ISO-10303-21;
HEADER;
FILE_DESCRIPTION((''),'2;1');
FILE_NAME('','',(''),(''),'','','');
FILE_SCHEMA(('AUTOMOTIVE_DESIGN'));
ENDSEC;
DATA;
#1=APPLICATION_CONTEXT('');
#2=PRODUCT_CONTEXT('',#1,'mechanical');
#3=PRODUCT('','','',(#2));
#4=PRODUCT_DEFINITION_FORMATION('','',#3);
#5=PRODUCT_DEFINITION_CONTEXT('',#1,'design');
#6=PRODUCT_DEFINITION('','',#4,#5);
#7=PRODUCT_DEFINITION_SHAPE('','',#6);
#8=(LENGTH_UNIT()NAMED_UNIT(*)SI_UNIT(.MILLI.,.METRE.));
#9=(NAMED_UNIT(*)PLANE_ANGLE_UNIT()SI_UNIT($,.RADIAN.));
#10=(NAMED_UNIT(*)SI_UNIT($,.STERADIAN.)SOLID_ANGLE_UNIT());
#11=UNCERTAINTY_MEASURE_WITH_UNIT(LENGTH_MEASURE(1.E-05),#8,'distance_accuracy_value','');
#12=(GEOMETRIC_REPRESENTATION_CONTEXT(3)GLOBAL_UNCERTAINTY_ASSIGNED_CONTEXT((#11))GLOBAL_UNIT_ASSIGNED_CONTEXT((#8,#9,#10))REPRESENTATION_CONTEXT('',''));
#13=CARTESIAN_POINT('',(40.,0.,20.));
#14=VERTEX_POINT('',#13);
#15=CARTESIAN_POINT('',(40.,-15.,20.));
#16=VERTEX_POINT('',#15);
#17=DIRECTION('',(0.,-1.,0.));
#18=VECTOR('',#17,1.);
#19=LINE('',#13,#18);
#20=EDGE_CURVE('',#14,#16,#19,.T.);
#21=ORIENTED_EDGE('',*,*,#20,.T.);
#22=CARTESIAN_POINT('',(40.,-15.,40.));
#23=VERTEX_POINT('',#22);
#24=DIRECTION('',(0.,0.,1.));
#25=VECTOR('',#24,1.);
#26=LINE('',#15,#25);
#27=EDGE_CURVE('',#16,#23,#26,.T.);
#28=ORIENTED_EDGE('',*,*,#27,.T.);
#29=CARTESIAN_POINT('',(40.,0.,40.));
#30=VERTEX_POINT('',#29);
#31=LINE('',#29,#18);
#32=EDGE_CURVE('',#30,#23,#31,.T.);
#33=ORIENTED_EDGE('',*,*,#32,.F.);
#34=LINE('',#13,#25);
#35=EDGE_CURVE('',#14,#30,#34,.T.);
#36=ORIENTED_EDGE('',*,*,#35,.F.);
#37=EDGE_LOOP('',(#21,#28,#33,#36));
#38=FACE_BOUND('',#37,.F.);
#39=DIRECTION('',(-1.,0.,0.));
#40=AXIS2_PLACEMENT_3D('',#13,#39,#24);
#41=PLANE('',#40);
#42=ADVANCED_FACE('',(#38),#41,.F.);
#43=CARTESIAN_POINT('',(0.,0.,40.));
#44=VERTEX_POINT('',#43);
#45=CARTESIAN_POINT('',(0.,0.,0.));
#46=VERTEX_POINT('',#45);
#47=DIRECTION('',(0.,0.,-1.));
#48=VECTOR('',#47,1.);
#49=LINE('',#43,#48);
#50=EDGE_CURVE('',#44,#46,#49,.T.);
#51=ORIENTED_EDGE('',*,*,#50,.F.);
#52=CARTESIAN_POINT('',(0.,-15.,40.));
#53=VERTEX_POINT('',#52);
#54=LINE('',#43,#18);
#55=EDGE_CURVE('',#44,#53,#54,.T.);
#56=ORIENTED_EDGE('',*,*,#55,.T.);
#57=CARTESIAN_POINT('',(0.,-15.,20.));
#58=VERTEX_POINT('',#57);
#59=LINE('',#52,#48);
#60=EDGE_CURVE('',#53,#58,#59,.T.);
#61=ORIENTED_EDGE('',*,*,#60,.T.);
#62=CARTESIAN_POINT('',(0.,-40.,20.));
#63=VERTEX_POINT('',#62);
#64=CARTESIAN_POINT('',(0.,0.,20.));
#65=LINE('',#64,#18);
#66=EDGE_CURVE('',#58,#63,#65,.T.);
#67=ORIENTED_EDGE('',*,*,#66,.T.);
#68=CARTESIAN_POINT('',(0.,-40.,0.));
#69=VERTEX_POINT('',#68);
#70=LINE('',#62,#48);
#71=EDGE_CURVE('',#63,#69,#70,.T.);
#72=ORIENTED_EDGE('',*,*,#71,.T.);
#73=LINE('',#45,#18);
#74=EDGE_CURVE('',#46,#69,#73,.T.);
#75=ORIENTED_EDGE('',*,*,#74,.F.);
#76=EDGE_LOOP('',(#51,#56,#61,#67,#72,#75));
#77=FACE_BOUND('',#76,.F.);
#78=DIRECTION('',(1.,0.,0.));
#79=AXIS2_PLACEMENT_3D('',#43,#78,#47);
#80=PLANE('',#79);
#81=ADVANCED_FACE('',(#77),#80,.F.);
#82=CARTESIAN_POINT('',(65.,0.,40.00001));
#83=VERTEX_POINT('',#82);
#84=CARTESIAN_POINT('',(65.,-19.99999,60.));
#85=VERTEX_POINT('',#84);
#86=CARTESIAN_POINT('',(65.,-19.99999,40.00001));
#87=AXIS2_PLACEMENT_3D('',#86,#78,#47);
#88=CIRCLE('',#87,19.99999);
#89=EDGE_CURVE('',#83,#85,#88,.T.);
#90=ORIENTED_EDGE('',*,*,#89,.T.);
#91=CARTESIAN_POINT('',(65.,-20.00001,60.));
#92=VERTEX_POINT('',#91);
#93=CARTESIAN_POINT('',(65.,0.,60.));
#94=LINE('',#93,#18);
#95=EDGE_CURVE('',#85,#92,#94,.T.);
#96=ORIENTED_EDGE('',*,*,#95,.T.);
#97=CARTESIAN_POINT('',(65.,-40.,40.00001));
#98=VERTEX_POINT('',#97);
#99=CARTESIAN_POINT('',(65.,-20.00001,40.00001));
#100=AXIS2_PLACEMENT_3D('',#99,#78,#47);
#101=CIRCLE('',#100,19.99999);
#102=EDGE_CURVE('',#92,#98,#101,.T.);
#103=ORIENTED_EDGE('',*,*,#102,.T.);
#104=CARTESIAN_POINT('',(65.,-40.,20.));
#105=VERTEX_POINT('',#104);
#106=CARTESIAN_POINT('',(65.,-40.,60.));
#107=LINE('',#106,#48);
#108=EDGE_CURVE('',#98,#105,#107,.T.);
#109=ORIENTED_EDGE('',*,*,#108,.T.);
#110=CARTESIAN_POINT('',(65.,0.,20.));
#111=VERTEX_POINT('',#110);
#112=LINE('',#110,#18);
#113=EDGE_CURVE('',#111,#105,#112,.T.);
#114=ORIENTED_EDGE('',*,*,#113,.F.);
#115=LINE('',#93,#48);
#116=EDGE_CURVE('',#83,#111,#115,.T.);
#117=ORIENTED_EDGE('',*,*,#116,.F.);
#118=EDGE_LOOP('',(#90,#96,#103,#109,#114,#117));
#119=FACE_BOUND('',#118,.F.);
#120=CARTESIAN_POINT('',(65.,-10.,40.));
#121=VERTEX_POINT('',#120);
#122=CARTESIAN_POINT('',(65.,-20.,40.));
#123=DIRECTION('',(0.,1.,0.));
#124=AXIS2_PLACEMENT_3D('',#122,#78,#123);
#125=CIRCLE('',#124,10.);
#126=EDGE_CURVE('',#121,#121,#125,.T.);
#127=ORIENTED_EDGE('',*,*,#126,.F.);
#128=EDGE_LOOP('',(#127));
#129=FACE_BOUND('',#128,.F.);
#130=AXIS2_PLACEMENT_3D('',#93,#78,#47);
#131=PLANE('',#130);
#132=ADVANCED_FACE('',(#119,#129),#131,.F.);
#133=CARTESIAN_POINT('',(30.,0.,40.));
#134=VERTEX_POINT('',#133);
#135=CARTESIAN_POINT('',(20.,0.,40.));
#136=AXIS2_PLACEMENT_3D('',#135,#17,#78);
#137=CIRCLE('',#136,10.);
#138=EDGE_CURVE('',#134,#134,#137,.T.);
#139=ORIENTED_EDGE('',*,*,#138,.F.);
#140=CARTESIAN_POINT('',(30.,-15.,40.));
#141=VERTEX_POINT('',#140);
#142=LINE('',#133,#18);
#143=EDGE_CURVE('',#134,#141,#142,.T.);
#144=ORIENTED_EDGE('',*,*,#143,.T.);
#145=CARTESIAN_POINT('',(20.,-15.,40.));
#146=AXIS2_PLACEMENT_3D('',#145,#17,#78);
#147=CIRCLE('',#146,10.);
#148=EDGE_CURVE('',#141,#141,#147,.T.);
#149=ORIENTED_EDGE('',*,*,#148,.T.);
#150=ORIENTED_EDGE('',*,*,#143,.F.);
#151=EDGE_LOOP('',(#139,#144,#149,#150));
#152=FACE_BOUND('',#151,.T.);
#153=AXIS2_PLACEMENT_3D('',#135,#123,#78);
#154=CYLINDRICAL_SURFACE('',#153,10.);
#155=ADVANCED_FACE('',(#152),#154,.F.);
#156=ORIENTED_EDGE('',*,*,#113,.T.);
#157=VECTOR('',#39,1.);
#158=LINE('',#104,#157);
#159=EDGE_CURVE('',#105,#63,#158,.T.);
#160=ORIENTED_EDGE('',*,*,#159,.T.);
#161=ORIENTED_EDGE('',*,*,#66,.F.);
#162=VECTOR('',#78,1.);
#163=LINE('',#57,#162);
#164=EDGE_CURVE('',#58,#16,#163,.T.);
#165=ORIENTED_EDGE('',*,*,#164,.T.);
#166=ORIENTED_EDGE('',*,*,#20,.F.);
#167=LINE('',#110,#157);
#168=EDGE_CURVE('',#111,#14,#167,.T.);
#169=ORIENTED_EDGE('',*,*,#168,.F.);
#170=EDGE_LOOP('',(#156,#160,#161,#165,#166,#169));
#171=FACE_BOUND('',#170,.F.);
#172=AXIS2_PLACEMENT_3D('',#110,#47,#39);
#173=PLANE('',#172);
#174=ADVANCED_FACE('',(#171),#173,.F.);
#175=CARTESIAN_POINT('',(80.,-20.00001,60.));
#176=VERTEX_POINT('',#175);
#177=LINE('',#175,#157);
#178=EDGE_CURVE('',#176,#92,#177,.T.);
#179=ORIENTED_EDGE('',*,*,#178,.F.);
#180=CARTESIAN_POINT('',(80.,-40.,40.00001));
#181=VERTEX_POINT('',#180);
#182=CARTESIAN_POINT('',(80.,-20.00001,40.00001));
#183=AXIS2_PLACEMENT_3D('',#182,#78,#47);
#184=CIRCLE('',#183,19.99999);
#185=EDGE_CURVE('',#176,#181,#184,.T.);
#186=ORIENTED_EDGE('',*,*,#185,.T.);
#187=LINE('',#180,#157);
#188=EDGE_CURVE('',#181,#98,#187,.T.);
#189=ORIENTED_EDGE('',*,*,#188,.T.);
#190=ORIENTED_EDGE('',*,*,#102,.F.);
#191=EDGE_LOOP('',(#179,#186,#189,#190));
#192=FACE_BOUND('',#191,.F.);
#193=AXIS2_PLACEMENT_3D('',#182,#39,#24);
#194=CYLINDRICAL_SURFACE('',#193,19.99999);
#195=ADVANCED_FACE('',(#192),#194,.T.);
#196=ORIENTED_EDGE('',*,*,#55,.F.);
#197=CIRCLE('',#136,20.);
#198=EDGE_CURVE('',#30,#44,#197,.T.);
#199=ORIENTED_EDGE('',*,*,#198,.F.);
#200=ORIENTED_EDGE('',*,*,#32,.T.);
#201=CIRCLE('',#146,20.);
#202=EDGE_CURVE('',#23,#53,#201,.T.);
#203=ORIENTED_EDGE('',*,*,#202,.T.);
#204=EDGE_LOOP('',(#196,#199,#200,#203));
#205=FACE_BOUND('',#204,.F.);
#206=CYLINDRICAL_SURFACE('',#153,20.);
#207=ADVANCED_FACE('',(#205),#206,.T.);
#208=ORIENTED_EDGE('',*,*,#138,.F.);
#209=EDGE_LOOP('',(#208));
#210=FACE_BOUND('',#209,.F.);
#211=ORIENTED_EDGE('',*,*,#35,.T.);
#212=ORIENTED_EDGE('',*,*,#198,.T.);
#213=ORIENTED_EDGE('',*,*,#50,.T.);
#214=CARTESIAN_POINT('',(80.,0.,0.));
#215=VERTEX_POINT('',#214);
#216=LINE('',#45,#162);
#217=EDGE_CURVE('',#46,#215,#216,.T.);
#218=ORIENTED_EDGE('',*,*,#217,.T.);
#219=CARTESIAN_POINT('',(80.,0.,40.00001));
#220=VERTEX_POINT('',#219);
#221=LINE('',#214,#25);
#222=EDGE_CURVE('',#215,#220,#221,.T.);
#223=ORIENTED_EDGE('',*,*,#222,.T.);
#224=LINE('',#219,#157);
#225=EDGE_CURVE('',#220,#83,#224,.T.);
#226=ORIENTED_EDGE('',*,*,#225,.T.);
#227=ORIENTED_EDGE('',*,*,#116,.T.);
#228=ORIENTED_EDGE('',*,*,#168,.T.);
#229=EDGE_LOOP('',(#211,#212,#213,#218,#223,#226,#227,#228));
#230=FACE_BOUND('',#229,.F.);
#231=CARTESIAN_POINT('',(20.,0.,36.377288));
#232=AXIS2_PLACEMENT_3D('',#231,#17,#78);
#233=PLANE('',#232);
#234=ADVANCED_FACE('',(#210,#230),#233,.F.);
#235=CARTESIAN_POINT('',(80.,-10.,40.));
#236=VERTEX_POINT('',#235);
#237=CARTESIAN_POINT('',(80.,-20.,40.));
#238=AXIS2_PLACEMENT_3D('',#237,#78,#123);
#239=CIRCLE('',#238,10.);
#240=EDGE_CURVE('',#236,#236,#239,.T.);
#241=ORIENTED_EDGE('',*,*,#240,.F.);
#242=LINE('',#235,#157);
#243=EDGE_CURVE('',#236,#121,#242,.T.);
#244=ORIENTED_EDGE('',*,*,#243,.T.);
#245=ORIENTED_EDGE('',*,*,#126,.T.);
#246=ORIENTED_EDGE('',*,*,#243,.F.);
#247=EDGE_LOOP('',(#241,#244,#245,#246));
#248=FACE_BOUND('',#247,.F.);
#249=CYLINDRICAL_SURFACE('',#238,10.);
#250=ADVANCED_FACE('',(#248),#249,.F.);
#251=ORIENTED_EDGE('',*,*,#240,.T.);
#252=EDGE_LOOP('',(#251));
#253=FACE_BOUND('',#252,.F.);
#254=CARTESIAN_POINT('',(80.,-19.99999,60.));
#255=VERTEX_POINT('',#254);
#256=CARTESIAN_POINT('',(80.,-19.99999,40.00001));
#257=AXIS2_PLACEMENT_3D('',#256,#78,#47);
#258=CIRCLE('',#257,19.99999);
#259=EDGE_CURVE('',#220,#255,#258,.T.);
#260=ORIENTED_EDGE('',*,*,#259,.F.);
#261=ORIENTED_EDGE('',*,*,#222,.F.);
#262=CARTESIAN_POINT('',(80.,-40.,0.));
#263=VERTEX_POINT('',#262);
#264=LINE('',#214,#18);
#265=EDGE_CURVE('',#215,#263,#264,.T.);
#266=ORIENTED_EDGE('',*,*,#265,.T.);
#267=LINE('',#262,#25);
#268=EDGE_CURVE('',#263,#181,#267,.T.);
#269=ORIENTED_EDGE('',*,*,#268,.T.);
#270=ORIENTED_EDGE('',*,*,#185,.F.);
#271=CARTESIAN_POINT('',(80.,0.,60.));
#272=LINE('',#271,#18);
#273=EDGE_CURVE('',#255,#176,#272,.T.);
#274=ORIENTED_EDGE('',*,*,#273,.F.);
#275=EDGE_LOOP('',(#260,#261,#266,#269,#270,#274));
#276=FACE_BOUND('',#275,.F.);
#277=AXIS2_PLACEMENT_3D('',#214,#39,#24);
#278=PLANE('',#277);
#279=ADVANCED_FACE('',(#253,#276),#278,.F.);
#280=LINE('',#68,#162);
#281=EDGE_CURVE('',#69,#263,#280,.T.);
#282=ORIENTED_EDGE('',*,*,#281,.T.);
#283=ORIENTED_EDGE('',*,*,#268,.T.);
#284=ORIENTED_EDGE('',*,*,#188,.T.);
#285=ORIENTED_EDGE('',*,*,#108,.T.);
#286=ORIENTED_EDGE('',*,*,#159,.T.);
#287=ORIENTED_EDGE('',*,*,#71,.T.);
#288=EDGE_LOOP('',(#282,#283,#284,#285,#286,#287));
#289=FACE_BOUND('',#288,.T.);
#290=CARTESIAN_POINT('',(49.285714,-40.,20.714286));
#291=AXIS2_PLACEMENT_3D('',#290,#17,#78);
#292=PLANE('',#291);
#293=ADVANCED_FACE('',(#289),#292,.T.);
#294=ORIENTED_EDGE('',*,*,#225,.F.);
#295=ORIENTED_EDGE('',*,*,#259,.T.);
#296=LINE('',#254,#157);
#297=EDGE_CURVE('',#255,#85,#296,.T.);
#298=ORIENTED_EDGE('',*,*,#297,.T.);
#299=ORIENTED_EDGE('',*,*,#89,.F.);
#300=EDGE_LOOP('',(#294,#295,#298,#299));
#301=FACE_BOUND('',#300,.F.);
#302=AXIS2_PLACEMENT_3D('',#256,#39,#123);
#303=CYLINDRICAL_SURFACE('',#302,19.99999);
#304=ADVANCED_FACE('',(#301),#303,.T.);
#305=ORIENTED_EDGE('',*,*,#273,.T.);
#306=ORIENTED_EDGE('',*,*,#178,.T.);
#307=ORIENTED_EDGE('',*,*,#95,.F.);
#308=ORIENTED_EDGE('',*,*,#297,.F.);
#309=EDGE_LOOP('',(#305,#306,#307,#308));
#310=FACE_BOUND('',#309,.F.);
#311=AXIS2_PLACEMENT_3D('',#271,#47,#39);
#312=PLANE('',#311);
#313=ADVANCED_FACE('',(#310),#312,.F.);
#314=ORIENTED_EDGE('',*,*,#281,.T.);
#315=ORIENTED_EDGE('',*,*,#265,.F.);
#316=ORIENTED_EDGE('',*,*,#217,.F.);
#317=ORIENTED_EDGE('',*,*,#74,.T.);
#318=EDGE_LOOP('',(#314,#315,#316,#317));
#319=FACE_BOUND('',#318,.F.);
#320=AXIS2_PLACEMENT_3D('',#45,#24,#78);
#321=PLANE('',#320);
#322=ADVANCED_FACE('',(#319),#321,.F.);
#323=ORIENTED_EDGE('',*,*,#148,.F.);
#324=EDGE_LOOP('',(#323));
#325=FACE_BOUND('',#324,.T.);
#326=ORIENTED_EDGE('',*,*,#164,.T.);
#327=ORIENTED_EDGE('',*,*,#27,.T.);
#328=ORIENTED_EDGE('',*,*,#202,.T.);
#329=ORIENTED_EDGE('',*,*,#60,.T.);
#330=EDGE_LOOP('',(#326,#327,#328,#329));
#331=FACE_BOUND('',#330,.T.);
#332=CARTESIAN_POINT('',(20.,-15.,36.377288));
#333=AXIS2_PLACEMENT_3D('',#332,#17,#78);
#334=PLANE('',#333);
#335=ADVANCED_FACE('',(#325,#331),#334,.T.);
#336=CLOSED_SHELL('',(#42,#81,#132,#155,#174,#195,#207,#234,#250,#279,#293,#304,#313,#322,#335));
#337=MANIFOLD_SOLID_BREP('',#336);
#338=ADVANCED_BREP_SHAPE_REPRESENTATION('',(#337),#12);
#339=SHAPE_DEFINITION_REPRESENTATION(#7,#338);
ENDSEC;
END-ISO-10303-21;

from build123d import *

# Parameters (mm, degrees)
F1_DEPTH = 40
F0_R     = 10
F2_DEPTH = 15
F3_R     = 19.99999
F4_R     = 10
F5_DEPTH = 15


# Not quite as in the source:
# - a fillet or chamfer is up to 0.001 mm smaller than in the source, because OpenCascade refuses the exact size


with BuildPart() as f1:
    # F0 (on Front) → F1 (new body)
    with BuildSketch(Plane.XZ):
        Polygon((0, 20), (0, 0), (80, 0), (80, 60), (65, 60), (65, 20), (40, 20), align=None)
    extrude(amount=F1_DEPTH)

    # F0 (on Front) → F2 (join)
    with BuildSketch(Plane.XZ):
        with BuildLine():
            Line((0, 40), (0, 20))
            Line((0, 20), (40, 20))
            Line((40, 20), (40, 40))
            ThreePointArc((40, 40), (20, 60), (0, 40))
        make_face()
        with Locations((20, 40)):
            Circle(F0_R, mode=Mode.SUBTRACT)
    extrude(amount=F2_DEPTH)

    # F3 (radius 20 in the source; OpenCascade refuses exactly that, so slightly less here)
    f3_edges = [f1.edges().sort_by_distance(p)[0] for p in [
        (72.5, -40, 60),
        (72.5, 0, 60),
    ]]
    fillet(f3_edges, radius=F3_R)

    # F4 (on face) → F5 (cut, through all)
    with BuildSketch(Plane.YZ.offset(80)):
        with Locations((-20, 40)):
            Circle(F4_R)
    extrude(amount=-F5_DEPTH, mode=Mode.SUBTRACT)


solid = f1.part
